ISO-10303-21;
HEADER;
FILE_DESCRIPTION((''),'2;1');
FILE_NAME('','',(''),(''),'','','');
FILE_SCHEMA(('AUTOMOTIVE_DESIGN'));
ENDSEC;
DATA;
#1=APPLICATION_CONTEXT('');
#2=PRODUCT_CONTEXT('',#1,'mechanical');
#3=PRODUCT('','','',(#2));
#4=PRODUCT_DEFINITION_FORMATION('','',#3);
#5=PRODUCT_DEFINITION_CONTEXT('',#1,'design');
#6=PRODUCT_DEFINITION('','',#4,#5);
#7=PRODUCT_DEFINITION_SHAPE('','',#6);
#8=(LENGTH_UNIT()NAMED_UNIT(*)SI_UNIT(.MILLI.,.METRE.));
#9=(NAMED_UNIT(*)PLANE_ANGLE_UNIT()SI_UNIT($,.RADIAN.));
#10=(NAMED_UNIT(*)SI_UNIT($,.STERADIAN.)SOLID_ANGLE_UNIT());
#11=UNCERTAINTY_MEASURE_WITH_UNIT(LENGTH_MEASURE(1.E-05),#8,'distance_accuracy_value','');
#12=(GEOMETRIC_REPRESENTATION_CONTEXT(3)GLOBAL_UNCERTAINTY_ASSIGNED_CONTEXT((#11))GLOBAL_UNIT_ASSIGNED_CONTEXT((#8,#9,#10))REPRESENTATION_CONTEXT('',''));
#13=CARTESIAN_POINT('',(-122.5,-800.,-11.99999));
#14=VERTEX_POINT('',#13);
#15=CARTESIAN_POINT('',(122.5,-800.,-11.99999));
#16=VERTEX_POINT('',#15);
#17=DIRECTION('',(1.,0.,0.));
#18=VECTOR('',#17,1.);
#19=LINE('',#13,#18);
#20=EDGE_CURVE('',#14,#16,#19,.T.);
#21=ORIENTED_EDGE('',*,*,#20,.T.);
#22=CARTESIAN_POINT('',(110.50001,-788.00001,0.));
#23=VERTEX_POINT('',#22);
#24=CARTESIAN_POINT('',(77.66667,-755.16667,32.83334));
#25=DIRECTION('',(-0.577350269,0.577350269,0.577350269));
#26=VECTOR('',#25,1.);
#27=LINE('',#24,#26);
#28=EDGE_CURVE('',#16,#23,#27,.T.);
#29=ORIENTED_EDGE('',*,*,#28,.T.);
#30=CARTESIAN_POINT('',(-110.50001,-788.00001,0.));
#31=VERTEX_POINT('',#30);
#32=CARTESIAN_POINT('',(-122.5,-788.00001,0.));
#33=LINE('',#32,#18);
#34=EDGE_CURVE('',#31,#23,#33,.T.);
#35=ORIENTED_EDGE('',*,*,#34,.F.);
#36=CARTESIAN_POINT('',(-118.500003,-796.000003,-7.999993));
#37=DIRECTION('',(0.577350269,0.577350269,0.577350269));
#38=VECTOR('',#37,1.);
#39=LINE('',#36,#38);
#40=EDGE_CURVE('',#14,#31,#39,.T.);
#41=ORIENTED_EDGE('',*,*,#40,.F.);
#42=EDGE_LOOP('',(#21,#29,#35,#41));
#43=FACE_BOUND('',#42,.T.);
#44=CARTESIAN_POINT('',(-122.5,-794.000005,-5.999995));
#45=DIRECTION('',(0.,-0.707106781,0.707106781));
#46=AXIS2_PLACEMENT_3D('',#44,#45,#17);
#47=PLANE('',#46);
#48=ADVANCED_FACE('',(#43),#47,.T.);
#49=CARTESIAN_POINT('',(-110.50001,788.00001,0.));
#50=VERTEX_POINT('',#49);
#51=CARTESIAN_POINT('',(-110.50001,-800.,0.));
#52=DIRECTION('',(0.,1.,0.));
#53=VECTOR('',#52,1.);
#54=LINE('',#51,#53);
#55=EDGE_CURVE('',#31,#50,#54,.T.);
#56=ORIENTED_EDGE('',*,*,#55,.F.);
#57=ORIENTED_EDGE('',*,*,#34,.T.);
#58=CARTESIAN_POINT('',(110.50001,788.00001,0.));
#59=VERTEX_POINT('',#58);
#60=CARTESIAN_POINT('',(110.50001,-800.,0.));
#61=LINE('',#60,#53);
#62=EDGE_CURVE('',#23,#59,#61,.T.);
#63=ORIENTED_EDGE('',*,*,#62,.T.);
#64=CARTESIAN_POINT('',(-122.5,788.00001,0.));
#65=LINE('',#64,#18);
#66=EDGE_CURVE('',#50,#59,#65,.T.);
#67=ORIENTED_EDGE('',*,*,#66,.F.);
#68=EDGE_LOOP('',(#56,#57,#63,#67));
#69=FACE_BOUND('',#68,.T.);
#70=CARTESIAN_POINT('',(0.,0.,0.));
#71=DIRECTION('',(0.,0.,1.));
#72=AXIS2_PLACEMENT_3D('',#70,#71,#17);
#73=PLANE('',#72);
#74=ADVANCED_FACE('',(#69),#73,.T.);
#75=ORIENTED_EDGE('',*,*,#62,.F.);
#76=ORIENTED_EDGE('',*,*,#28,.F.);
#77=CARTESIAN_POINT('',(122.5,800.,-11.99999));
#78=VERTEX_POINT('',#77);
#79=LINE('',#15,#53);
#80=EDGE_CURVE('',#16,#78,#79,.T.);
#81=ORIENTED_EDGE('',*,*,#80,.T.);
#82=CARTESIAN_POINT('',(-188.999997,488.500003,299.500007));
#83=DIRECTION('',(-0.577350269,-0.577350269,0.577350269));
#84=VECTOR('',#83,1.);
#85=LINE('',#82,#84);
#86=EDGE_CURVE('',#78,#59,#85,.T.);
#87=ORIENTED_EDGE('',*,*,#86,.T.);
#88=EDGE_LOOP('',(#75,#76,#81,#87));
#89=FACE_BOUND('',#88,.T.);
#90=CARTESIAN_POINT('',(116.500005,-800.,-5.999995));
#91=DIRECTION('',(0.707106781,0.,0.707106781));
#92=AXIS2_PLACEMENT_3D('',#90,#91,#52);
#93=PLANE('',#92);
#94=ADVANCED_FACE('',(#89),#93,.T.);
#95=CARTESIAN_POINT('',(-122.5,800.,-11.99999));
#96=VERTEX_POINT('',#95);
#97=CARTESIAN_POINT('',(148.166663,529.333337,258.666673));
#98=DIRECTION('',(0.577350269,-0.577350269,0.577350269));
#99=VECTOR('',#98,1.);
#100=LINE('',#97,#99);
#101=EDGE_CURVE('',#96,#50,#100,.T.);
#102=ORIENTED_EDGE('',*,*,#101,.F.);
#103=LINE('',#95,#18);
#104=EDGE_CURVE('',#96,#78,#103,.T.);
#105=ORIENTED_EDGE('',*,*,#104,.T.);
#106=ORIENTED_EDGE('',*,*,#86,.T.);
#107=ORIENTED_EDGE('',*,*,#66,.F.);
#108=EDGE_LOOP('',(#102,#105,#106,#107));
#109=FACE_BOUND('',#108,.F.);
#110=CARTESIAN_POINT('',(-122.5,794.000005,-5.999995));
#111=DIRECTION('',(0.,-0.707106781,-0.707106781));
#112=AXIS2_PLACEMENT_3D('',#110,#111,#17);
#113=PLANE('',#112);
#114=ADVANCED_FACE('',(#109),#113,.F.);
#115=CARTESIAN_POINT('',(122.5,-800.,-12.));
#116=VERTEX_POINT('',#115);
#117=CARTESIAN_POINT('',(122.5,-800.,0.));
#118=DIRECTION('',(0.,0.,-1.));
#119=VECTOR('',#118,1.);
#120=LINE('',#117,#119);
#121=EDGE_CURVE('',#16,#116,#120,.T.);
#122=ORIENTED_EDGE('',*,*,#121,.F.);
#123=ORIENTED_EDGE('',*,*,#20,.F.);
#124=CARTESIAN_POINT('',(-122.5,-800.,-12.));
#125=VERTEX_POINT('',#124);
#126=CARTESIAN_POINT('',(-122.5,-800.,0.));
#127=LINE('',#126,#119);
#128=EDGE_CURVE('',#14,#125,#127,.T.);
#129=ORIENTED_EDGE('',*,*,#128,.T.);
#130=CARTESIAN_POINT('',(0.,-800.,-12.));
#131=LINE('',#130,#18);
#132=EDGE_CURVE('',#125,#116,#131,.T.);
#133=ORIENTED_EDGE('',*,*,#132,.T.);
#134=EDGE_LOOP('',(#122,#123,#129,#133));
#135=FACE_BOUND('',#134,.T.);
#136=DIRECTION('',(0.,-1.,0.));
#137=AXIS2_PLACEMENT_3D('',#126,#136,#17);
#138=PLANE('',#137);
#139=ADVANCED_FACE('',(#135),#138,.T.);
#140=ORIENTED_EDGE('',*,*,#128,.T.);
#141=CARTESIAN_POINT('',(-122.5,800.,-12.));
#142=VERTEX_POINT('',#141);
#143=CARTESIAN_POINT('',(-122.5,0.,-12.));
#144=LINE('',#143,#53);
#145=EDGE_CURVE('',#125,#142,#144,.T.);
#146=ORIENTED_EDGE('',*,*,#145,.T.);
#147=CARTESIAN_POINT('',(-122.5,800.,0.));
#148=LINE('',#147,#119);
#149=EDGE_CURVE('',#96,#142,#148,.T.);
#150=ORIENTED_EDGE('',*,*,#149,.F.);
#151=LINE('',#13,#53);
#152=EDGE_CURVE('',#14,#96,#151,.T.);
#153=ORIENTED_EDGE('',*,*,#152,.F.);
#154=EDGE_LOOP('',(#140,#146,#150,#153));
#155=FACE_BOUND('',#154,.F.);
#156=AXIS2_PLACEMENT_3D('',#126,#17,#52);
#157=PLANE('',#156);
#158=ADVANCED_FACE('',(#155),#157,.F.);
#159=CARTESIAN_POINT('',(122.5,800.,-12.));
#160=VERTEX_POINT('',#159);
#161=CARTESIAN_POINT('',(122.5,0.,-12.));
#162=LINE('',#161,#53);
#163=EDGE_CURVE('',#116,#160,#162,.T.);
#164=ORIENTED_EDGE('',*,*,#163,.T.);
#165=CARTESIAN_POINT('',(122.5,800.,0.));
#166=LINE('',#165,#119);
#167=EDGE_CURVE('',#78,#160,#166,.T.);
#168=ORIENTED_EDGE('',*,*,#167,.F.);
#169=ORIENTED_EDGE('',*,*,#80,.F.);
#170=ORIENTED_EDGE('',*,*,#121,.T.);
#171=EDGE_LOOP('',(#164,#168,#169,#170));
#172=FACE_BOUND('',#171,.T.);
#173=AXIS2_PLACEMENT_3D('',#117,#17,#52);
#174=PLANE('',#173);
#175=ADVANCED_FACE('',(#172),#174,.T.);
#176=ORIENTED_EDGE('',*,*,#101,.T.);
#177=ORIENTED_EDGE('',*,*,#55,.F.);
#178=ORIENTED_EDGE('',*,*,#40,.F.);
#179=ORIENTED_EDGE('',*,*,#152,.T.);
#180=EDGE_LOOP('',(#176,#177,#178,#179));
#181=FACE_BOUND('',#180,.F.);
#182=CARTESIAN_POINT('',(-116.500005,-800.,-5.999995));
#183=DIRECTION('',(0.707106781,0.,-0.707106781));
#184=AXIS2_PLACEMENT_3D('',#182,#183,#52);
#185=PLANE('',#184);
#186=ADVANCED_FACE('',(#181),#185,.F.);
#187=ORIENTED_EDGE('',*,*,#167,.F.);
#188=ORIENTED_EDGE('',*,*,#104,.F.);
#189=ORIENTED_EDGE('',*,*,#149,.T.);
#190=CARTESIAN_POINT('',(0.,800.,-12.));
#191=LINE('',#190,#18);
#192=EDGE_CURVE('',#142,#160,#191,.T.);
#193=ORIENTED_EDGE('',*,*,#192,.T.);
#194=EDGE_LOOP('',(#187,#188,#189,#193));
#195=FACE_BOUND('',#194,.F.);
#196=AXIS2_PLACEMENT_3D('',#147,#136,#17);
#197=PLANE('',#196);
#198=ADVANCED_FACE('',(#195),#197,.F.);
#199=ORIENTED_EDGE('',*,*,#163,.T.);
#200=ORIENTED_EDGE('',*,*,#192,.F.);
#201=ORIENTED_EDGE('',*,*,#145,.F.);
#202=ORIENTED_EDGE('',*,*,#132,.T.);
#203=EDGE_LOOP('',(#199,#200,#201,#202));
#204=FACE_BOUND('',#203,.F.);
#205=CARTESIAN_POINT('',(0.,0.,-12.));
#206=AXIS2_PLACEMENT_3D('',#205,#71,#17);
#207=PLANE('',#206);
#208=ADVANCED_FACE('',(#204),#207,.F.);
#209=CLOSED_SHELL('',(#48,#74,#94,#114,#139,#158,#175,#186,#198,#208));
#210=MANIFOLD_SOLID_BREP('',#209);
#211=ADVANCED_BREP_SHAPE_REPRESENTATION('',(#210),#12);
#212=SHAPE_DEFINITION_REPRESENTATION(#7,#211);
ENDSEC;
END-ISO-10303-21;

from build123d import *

# Parameters (mm, degrees)
F0_W     = 245
F0_H     = 1600
F1_DEPTH = 12
F2_SIZE  = 11.99999


# Not quite as in the source:
# - a fillet or chamfer is up to 0.001 mm smaller than in the source, because OpenCascade refuses the exact size


with BuildPart() as f1:
    # F0 (on Top) → F1 (new body)
    with BuildSketch(Plane.XY):
        Rectangle(F0_W, F0_H)
    extrude(amount=-F1_DEPTH)

    # F2 (size 12 in the source; OpenCascade refuses exactly that, so slightly less here)
    f2_edges = [f1.edges().sort_by_distance(p)[0] for p in [
        (0, -800, 0),
        (122.5, 0, 0),
        (-122.5, 0, 0),
        (0, 800, 0),
    ]]
    chamfer(f2_edges, length=F2_SIZE)


solid = f1.part
